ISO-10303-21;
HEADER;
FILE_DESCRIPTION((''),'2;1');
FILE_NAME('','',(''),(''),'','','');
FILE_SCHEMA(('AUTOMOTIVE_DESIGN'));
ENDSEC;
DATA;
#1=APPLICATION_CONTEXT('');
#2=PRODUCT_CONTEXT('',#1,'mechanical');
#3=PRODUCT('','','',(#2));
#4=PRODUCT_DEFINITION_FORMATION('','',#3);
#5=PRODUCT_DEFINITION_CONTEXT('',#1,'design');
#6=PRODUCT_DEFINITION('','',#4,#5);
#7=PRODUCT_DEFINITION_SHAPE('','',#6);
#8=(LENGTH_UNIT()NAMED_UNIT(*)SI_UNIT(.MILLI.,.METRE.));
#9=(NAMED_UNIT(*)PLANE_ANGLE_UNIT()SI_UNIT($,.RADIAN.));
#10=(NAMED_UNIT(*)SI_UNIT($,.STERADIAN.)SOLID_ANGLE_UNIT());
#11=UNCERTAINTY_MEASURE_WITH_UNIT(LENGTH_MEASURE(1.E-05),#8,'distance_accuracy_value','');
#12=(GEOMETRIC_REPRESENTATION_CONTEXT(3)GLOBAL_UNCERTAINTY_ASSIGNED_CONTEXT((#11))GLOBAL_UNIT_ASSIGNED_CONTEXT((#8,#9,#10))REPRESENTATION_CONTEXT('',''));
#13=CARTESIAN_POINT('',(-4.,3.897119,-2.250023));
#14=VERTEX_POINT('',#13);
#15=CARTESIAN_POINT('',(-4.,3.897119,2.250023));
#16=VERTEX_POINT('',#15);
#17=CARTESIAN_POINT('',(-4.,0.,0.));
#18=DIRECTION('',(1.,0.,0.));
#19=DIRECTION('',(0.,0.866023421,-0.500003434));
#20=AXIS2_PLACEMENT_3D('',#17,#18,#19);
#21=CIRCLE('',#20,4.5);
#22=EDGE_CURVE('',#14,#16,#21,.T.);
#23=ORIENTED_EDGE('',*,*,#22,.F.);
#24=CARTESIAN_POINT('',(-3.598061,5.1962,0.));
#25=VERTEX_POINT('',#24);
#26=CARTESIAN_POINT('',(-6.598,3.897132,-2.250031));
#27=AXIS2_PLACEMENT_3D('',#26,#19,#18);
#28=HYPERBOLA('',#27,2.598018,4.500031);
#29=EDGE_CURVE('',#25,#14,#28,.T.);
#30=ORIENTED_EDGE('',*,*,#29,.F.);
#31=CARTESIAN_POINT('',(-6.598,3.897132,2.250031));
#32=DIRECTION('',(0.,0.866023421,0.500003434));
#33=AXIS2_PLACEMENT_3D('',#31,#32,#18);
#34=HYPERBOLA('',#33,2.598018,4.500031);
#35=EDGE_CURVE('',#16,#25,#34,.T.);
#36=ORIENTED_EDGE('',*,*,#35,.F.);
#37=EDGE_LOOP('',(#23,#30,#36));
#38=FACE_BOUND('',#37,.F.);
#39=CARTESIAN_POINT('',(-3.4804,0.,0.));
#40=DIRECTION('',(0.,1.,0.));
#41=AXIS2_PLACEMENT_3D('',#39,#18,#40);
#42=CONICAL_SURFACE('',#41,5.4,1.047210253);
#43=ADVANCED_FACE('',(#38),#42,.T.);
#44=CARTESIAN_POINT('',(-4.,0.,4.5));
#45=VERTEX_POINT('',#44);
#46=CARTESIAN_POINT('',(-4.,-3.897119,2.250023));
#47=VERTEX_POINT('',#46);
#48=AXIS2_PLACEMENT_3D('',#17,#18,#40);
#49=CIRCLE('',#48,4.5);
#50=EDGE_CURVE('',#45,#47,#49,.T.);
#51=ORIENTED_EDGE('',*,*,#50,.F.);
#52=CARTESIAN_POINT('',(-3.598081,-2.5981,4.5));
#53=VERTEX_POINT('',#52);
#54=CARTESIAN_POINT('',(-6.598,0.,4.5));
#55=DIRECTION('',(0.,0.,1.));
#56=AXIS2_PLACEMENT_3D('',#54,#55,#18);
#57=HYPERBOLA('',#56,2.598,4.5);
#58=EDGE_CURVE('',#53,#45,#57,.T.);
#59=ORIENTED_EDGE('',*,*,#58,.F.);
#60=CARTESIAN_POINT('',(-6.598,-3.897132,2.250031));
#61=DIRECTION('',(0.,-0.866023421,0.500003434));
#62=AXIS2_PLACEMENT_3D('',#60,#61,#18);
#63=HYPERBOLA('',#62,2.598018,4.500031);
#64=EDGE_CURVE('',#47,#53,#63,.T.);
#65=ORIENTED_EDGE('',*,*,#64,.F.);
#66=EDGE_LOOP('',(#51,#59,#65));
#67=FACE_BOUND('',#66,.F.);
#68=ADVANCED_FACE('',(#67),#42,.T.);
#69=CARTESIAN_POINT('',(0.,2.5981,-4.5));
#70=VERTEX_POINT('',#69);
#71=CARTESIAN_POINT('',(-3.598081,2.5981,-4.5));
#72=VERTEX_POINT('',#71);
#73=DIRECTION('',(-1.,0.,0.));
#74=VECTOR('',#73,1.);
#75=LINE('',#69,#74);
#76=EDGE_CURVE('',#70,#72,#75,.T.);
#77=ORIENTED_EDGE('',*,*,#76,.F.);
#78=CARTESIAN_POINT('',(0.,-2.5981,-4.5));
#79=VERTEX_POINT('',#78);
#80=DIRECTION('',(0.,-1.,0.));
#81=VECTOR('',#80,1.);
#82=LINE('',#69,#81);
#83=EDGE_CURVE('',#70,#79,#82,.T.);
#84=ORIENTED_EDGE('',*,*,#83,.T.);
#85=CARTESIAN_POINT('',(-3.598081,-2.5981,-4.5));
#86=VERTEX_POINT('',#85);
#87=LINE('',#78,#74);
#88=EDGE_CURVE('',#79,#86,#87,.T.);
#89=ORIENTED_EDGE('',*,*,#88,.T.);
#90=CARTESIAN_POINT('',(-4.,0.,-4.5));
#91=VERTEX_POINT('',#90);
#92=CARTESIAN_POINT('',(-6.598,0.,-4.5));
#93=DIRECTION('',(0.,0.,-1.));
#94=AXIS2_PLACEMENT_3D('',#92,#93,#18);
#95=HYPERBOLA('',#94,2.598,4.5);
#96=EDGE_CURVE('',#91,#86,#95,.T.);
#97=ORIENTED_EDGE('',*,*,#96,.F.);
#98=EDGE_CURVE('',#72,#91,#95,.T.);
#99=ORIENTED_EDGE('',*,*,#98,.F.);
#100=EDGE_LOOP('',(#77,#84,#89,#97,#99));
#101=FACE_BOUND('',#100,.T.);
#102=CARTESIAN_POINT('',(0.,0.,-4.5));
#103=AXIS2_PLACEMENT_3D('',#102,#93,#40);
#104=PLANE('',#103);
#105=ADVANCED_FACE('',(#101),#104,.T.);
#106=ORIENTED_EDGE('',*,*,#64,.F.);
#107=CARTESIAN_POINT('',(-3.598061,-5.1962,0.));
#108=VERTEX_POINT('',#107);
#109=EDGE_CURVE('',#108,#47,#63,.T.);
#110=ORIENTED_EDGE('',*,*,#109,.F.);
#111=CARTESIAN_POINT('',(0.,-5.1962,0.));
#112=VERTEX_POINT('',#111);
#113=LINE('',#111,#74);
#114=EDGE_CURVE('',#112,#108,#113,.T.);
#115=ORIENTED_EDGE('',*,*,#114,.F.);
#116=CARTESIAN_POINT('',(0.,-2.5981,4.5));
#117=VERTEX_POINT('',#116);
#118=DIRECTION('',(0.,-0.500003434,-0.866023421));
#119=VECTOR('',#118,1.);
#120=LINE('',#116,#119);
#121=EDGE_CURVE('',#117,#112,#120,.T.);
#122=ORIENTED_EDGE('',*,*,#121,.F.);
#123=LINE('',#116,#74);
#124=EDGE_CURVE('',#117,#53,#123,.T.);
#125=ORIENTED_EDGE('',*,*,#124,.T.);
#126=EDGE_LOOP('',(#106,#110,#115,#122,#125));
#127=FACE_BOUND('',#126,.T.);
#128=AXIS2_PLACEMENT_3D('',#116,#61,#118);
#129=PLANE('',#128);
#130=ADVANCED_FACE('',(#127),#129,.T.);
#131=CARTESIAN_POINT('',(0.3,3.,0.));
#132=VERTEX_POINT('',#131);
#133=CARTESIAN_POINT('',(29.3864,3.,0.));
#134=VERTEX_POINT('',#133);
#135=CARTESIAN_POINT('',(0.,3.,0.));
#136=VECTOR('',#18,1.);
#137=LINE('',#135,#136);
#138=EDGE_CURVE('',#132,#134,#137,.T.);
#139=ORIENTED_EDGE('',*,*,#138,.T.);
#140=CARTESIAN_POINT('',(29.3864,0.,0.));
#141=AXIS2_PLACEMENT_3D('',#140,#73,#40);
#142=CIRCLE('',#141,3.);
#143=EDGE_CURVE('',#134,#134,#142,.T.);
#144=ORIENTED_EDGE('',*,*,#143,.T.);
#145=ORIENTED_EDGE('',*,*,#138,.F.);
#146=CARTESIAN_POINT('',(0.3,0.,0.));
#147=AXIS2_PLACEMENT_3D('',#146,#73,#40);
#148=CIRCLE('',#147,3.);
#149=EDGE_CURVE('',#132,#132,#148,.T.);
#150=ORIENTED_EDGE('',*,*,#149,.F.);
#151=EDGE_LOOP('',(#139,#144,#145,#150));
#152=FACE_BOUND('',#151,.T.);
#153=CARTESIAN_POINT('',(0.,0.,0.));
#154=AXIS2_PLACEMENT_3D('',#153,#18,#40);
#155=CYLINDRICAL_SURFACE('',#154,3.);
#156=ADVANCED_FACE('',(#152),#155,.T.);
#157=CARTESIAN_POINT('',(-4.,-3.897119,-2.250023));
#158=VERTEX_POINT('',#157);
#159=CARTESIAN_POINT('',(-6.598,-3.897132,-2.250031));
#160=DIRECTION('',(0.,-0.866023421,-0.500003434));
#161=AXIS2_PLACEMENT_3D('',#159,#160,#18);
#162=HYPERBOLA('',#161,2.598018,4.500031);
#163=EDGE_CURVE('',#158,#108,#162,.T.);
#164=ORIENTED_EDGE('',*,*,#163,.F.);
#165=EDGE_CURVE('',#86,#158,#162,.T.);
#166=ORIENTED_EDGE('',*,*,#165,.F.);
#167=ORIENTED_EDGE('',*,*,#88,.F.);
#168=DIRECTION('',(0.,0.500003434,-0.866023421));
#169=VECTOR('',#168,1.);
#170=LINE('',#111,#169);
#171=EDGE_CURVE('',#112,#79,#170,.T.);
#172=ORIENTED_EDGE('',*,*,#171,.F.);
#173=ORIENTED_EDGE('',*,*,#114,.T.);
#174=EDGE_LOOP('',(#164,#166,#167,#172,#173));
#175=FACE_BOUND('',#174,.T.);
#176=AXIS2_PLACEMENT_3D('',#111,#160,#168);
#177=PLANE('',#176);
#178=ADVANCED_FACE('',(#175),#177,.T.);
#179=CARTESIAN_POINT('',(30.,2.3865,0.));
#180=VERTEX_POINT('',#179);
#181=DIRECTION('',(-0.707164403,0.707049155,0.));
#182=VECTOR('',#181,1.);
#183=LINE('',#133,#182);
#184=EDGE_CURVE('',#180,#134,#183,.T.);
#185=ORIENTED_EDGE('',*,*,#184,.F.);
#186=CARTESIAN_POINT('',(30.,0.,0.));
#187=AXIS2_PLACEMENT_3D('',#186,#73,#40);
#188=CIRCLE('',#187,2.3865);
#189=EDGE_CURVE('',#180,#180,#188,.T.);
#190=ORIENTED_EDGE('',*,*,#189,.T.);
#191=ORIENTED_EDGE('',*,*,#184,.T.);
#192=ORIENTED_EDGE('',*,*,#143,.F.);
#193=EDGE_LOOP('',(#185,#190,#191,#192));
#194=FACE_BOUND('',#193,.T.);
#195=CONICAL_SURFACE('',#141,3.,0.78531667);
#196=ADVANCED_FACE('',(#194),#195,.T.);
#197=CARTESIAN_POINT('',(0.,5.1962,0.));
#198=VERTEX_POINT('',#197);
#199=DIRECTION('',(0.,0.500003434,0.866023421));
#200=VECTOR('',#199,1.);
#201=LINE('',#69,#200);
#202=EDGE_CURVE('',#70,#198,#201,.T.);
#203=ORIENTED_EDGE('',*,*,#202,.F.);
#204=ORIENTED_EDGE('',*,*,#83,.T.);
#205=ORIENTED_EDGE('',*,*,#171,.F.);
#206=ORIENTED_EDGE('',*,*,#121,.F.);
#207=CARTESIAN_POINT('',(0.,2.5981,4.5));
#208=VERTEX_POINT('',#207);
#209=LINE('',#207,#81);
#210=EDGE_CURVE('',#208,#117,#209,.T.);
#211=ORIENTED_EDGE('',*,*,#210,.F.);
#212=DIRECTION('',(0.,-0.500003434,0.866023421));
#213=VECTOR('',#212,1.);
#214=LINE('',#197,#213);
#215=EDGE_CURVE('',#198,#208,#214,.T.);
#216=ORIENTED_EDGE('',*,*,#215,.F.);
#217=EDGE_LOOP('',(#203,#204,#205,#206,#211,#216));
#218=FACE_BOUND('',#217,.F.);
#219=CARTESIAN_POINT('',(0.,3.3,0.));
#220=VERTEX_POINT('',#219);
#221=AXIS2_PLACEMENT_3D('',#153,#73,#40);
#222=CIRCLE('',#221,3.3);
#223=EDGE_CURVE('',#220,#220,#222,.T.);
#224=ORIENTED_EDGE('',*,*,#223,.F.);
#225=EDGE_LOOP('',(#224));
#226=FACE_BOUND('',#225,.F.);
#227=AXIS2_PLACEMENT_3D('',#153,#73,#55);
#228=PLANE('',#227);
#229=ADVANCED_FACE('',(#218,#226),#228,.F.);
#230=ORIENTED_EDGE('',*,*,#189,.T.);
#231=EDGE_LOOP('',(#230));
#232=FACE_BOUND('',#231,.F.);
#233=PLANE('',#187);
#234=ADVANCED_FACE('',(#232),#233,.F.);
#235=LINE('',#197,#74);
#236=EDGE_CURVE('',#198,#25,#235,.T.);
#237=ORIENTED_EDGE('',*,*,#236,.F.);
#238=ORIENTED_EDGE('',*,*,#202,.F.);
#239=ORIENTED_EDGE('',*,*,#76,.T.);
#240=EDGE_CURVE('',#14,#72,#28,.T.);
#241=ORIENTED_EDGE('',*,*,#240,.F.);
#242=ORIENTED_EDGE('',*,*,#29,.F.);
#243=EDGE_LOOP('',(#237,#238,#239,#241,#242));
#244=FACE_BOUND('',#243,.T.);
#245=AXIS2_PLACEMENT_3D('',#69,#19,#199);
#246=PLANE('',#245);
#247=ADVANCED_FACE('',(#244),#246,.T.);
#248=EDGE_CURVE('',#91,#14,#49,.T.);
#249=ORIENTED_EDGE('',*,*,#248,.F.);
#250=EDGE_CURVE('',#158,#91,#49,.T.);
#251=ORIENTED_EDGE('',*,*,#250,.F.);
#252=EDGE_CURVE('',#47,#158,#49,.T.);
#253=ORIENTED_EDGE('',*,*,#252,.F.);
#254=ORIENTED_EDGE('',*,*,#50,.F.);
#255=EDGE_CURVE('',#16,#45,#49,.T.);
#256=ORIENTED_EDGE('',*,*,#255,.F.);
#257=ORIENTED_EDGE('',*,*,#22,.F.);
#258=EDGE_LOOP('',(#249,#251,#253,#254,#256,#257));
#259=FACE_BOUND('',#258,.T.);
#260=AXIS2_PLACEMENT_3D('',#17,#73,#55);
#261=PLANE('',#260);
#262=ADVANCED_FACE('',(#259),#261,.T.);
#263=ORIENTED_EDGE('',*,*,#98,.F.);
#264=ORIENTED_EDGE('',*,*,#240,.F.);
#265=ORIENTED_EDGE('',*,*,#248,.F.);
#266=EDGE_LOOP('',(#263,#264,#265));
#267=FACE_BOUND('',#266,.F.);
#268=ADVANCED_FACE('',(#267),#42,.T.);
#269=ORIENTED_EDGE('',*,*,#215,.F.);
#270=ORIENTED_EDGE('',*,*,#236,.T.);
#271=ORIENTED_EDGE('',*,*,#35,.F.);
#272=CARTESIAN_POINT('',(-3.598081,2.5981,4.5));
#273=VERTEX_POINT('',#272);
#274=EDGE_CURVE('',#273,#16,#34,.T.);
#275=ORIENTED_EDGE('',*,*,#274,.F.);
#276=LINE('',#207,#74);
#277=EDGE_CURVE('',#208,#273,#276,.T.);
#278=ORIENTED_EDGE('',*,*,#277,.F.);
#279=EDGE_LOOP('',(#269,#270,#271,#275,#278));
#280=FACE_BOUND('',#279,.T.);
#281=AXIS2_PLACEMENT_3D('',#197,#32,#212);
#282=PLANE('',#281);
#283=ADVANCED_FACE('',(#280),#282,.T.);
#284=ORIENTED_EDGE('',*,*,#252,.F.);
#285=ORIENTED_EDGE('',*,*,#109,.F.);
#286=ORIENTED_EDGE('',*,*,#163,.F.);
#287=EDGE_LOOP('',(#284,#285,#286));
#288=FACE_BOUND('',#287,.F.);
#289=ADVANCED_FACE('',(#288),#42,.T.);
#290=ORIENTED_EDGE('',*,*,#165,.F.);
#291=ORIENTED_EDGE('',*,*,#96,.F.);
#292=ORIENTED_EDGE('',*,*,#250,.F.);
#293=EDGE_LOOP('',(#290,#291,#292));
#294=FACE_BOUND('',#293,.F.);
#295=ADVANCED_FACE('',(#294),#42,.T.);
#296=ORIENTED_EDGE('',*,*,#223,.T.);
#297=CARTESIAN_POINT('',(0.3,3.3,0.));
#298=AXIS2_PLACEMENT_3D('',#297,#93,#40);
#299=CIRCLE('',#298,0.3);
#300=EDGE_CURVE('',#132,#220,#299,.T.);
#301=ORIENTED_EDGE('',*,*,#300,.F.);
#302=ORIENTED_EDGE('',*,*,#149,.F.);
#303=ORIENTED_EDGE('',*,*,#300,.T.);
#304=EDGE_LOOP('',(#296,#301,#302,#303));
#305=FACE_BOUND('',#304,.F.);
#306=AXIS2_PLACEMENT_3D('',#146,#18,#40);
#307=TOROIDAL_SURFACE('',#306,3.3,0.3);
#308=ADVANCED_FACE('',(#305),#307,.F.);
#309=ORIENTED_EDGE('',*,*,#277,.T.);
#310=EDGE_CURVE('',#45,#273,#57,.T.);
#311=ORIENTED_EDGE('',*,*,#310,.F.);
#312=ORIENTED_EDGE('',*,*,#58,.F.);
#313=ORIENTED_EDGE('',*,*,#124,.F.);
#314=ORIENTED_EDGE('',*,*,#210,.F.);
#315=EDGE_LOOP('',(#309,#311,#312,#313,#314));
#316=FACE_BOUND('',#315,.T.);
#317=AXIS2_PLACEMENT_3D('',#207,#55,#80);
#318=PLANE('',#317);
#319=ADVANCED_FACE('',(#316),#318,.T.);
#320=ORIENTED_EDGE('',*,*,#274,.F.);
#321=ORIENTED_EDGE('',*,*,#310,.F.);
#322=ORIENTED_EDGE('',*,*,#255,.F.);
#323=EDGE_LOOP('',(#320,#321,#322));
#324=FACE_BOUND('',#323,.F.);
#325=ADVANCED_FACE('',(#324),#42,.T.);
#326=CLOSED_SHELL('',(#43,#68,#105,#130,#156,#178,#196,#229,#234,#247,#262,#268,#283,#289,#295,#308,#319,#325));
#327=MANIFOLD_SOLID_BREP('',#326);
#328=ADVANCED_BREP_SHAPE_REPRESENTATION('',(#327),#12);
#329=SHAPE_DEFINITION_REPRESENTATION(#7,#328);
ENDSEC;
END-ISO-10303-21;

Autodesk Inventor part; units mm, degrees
ref_plane "YZ Plane" through (0, 0, 0) normal (1, 0, 0) x (0, 1, 0)
ref_plane "XZ Plane" through (0, 0, 0) normal (0, 1, 0) x (-1, 0, 0)
sketch "Sketch1" plane through (0, 0, 0) normal (0, 0, 1) x (1, 0, 0)
  line L0 (0, 3) -> (30, 3)
  line L1 (30, 3) -> (30, 0)
  line L2 (30, 0) -> (0, 0)
  line L3 (-6, 0) -> (36, 0) projected
  line L4 (0, -0.6) -> (0, 3.6) projected
  line L5 (0, 3) -> (0, 0)
  dimension "d2" = 6
  dimension "d59" = 30
revolve "Body" add sketch "Sketch1" angle 360 about axis through (30, 0, 0) along (-1, 0, 0)
sketch "Sketch2" plane through (0, 0, 0) normal (-1, 0, 0) x (0, 0, 1)
  line L0 (0, 5.1962) -> (4.5, 2.5981)
  line L1 (4.5, 2.5981) -> (4.5, -2.5981)
  line L2 (4.5, -2.5981) -> (0, -5.1962)
  line L3 (0, -5.1962) -> (-4.5, -2.5981)
  line L4 (-4.5, -2.5981) -> (-4.5, 2.5981)
  line L5 (-4.5, 2.5981) -> (0, 5.1962)
  line L6 (-6.3, 0) -> (6.3, 0) projected
  line L7 (0, 7.2746) -> (0, -7.2746) projected
  point P0 (0, 0)
  point P1 (0, 0)
  dimension "d11" = 9
extrude "Head" add sketch "Sketch2" along normal blind 4
sketch "Sketch4" plane through (0, 0, 0) normal (0, 0, 1) x (1, 0, 0)
  line L0 (-3.4804, 5.4) -> (-4, 4.5)
  line L1 (-1.1, 0) -> (-0.234, 0)
  line L2 (-4.7532, 0) -> (0.5192, 0) projected
  line L3 (-4, 5.4) -> (-3.4804, 5.4)
  line L4 (-4, 4.5) -> (-4, 5.4)
  line L5 (0, 6.48) -> (0, -1.08) projected
  dimension "d65" = 9
  dimension "d67" = 30
  dimension "d68" = 10.8
  dimension "d69" = 4
revolve "Chamfer1" cut sketch "Sketch4" angle 360 about axis through (-1.1, 0, 0) along (1, 0, 0)
thread "Thread" size "M6x1" class "6g" standard "ISO Metric profile" length 11
chamfer "Chamfer2" distance 0.6135 distance2 0.6136 1 edges at (30, -3, 0) measured on face at (30, -0.5525, 1.8157)
fillet "Fillet2" radius 0.3 1 edges at (0, -3, 0)
ref_plane "Work Plane1" through (1.525, 0, 0) normal (0, 0, 1) x (1, 0, 0)
equation "\"d71\" = RR"
equation "\"d11\" = SW"
equation "\"d3\" = KOH"
equation "\"d15\" = GEL"
equation "\"d6\" = -0.5 * SPD + 0.5 * GD"
equation "\"d2\" = GD"
equation "\"d59\" = NLG"
equation "\"d65\" = SW"
equation "\"d67\" = ANG1"
equation "\"d68\" = 1.2 * SW"
equation "\"d69\" = KOH"
equation "\"NLG\" = 30"
equation "\"GD\" = NND"
equation "\"BDM\" = NND"
equation "\"KOH\" = 4"
equation "\"GEL\" = 11"
equation "\"SW\" = 9"
equation "\"SW0\" = 9"
equation "\"SPD\" = NND - 1.2269 * PTC"
equation "\"SD2\" = NND"
equation "\"SD\" = 0"
equation "\"ANG1\" = 30deg"
equation "\"GAL\" = 0.61345 * PTC"
equation "\"GUL\" = 0.61345 * PTC"
equation "\"RR\" = 0.3"
equation "\"RR1\" = 0.1"
equation "\"GD1\" = THREADDIA - 1.2269 * PTC"
equation "\"THREADDIA\" = 6"
equation "\"TOA\" = 30deg"
equation "\"FAWI\" = 60deg"
equation "\"PTC\" = 1"
equation "\"NND\" = 6"
equation "\"E0\" = 1.155 * SW"
properties part number "CSN 02 1201 - M6 x 30" material "Steel, Mild"
